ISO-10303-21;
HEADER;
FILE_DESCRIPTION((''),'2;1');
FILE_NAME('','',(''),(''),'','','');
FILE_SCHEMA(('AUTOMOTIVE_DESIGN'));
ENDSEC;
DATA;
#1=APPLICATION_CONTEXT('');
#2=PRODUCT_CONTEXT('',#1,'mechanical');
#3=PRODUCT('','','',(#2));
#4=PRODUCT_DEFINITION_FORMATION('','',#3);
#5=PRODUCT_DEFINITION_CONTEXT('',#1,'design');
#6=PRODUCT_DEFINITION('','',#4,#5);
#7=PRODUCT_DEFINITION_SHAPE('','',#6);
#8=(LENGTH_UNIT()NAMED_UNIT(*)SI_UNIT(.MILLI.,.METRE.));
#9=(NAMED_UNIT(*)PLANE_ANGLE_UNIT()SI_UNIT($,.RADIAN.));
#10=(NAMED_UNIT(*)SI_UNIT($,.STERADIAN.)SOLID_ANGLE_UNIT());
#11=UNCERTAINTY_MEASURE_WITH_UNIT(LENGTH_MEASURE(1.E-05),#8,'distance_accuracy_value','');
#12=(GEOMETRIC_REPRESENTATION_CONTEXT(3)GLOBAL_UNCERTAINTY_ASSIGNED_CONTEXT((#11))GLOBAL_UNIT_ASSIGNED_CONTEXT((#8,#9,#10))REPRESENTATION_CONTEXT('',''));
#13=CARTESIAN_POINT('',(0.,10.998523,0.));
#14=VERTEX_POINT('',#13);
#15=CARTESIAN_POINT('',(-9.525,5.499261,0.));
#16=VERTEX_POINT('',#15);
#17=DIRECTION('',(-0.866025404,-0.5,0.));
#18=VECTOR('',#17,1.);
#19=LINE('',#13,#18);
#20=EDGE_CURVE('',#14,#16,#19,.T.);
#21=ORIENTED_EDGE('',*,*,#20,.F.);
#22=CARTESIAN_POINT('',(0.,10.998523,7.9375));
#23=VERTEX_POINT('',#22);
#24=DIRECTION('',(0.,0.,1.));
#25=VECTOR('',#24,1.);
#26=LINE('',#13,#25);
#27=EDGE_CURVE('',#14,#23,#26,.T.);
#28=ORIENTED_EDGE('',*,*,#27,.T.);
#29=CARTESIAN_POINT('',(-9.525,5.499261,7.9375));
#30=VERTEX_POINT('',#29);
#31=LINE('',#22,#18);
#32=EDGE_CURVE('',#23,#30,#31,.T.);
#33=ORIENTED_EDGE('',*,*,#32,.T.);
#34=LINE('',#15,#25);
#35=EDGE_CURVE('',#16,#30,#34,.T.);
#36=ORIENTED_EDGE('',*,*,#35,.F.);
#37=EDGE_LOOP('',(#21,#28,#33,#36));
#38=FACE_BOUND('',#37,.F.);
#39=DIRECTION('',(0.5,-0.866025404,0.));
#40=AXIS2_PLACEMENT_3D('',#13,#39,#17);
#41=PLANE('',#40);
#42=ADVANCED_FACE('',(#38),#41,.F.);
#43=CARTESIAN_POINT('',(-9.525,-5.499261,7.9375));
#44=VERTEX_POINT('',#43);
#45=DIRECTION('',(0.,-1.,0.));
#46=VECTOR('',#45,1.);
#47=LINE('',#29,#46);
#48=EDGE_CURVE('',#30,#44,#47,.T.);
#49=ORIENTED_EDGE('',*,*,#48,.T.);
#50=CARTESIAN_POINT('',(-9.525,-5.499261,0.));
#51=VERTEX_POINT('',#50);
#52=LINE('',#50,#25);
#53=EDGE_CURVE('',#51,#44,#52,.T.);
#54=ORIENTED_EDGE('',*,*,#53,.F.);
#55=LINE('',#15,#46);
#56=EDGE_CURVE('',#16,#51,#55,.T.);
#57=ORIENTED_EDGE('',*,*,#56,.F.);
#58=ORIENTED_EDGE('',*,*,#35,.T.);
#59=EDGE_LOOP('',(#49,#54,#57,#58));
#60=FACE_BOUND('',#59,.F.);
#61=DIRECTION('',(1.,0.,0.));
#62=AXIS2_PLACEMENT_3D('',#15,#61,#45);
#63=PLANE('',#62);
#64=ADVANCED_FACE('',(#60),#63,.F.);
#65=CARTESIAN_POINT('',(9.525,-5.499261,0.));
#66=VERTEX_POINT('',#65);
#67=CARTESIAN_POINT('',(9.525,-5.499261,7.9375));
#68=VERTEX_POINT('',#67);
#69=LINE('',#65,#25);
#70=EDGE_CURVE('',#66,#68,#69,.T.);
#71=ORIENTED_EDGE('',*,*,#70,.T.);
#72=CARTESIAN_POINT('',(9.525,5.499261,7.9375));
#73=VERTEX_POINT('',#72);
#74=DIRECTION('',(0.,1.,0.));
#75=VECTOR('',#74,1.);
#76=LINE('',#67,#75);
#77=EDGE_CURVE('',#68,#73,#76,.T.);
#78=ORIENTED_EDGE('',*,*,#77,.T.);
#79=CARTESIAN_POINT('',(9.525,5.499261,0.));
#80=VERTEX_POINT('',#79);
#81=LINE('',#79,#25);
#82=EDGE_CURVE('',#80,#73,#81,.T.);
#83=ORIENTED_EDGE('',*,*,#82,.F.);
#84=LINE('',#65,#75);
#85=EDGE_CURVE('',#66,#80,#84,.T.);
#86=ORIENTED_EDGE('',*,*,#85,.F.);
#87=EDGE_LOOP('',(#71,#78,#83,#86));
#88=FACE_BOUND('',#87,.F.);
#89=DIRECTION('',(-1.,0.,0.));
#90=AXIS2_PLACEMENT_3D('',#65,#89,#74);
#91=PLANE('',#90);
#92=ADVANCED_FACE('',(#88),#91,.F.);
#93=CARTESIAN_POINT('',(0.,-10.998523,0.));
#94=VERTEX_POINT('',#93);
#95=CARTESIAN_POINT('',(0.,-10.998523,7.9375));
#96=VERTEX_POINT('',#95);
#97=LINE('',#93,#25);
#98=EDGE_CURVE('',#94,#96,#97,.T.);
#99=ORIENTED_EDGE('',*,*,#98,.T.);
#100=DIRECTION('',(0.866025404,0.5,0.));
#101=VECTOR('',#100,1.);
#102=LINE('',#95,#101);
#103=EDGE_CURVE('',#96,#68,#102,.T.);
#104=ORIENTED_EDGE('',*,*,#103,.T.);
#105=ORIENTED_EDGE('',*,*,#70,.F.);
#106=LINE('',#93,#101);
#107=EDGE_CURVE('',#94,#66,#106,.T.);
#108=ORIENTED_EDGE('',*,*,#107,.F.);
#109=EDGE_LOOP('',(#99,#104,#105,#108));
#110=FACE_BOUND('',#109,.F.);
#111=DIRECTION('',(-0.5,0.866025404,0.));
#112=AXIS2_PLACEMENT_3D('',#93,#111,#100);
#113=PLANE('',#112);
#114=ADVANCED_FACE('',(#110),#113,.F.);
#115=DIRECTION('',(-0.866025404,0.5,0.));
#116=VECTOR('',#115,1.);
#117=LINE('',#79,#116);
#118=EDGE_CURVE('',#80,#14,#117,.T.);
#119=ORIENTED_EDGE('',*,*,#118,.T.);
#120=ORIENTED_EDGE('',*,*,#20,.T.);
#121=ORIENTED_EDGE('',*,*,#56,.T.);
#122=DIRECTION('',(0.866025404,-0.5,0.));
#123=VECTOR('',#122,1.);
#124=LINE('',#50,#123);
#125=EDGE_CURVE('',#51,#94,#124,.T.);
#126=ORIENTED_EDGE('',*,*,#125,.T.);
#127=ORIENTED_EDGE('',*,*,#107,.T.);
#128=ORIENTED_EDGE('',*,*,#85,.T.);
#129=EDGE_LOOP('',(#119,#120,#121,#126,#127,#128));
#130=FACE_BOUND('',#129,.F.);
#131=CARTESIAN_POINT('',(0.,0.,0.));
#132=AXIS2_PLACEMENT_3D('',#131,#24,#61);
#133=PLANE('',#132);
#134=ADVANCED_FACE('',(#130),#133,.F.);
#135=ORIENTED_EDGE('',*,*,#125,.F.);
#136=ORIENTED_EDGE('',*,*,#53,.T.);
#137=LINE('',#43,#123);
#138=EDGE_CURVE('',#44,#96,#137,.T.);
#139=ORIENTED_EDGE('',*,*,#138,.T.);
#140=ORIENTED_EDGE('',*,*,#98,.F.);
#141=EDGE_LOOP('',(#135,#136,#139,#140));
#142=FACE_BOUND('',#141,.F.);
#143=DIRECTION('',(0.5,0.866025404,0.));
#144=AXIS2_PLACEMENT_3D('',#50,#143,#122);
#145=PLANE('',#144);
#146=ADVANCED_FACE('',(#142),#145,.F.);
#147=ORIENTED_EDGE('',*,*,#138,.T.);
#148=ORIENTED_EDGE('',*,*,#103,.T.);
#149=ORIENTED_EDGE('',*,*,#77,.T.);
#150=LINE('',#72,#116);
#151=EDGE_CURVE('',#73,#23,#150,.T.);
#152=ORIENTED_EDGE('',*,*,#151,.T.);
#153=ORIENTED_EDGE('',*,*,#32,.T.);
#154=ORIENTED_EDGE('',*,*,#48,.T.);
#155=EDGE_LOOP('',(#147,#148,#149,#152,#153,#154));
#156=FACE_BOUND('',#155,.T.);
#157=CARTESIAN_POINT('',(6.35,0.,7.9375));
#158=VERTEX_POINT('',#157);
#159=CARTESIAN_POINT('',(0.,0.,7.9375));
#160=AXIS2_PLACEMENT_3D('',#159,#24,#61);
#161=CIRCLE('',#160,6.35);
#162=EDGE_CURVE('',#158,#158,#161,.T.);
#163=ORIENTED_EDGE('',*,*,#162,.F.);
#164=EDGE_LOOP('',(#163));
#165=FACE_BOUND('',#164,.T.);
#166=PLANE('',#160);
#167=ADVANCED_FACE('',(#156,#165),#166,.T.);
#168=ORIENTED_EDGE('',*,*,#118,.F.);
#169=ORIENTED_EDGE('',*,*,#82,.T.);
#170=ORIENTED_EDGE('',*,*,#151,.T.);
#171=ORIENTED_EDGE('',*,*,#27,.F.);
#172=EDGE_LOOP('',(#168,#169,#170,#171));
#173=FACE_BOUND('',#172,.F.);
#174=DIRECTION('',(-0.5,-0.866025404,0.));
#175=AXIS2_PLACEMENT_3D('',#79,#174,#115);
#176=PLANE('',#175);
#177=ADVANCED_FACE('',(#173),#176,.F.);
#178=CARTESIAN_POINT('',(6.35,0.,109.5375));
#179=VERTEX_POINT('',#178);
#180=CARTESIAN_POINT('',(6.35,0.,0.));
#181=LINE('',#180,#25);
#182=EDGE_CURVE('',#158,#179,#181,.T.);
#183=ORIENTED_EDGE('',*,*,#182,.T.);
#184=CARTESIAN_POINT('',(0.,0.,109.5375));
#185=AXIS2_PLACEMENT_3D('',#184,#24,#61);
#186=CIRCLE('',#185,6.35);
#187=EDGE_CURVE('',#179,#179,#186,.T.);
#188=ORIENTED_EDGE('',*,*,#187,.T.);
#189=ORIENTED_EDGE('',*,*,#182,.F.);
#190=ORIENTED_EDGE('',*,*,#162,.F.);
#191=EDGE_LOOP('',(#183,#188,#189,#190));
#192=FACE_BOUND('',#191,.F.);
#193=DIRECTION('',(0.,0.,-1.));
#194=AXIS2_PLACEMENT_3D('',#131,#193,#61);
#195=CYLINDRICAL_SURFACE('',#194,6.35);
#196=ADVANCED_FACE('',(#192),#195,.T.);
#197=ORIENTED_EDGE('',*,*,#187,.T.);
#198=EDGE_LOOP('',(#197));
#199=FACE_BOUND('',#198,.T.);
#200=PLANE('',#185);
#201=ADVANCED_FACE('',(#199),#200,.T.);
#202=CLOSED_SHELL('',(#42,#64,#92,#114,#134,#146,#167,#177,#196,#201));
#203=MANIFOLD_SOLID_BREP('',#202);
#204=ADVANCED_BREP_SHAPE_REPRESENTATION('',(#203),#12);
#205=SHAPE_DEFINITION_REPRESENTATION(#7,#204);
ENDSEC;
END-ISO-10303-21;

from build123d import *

# Parameters (mm, degrees)
F1_R     = 6.35
F2_DEPTH = 7.9375
F3_DEPTH = 109.5375


# Not quite as in the source:
# - a variable given as a bare number and used for a length is read in inches; the dataset says mm whatever the document's units were


with BuildPart() as f2:
    # F1 (on Top) → F2 (new body)
    with BuildSketch(Plane.XY):
        Polygon((9.525, -5.499261314), (9.525, 5.499261314), (0, 10.9985226281), (-9.525, 5.499261314), (-9.525, -5.499261314), (0, -10.9985226281), align=None)
        Circle(F1_R, mode=Mode.SUBTRACT)
    extrude(amount=F2_DEPTH)

    # F1 (on Top) → F3 (join)
    with BuildSketch(Plane.XY):
        Circle(F1_R)
    extrude(amount=F3_DEPTH)


solid = f2.part
